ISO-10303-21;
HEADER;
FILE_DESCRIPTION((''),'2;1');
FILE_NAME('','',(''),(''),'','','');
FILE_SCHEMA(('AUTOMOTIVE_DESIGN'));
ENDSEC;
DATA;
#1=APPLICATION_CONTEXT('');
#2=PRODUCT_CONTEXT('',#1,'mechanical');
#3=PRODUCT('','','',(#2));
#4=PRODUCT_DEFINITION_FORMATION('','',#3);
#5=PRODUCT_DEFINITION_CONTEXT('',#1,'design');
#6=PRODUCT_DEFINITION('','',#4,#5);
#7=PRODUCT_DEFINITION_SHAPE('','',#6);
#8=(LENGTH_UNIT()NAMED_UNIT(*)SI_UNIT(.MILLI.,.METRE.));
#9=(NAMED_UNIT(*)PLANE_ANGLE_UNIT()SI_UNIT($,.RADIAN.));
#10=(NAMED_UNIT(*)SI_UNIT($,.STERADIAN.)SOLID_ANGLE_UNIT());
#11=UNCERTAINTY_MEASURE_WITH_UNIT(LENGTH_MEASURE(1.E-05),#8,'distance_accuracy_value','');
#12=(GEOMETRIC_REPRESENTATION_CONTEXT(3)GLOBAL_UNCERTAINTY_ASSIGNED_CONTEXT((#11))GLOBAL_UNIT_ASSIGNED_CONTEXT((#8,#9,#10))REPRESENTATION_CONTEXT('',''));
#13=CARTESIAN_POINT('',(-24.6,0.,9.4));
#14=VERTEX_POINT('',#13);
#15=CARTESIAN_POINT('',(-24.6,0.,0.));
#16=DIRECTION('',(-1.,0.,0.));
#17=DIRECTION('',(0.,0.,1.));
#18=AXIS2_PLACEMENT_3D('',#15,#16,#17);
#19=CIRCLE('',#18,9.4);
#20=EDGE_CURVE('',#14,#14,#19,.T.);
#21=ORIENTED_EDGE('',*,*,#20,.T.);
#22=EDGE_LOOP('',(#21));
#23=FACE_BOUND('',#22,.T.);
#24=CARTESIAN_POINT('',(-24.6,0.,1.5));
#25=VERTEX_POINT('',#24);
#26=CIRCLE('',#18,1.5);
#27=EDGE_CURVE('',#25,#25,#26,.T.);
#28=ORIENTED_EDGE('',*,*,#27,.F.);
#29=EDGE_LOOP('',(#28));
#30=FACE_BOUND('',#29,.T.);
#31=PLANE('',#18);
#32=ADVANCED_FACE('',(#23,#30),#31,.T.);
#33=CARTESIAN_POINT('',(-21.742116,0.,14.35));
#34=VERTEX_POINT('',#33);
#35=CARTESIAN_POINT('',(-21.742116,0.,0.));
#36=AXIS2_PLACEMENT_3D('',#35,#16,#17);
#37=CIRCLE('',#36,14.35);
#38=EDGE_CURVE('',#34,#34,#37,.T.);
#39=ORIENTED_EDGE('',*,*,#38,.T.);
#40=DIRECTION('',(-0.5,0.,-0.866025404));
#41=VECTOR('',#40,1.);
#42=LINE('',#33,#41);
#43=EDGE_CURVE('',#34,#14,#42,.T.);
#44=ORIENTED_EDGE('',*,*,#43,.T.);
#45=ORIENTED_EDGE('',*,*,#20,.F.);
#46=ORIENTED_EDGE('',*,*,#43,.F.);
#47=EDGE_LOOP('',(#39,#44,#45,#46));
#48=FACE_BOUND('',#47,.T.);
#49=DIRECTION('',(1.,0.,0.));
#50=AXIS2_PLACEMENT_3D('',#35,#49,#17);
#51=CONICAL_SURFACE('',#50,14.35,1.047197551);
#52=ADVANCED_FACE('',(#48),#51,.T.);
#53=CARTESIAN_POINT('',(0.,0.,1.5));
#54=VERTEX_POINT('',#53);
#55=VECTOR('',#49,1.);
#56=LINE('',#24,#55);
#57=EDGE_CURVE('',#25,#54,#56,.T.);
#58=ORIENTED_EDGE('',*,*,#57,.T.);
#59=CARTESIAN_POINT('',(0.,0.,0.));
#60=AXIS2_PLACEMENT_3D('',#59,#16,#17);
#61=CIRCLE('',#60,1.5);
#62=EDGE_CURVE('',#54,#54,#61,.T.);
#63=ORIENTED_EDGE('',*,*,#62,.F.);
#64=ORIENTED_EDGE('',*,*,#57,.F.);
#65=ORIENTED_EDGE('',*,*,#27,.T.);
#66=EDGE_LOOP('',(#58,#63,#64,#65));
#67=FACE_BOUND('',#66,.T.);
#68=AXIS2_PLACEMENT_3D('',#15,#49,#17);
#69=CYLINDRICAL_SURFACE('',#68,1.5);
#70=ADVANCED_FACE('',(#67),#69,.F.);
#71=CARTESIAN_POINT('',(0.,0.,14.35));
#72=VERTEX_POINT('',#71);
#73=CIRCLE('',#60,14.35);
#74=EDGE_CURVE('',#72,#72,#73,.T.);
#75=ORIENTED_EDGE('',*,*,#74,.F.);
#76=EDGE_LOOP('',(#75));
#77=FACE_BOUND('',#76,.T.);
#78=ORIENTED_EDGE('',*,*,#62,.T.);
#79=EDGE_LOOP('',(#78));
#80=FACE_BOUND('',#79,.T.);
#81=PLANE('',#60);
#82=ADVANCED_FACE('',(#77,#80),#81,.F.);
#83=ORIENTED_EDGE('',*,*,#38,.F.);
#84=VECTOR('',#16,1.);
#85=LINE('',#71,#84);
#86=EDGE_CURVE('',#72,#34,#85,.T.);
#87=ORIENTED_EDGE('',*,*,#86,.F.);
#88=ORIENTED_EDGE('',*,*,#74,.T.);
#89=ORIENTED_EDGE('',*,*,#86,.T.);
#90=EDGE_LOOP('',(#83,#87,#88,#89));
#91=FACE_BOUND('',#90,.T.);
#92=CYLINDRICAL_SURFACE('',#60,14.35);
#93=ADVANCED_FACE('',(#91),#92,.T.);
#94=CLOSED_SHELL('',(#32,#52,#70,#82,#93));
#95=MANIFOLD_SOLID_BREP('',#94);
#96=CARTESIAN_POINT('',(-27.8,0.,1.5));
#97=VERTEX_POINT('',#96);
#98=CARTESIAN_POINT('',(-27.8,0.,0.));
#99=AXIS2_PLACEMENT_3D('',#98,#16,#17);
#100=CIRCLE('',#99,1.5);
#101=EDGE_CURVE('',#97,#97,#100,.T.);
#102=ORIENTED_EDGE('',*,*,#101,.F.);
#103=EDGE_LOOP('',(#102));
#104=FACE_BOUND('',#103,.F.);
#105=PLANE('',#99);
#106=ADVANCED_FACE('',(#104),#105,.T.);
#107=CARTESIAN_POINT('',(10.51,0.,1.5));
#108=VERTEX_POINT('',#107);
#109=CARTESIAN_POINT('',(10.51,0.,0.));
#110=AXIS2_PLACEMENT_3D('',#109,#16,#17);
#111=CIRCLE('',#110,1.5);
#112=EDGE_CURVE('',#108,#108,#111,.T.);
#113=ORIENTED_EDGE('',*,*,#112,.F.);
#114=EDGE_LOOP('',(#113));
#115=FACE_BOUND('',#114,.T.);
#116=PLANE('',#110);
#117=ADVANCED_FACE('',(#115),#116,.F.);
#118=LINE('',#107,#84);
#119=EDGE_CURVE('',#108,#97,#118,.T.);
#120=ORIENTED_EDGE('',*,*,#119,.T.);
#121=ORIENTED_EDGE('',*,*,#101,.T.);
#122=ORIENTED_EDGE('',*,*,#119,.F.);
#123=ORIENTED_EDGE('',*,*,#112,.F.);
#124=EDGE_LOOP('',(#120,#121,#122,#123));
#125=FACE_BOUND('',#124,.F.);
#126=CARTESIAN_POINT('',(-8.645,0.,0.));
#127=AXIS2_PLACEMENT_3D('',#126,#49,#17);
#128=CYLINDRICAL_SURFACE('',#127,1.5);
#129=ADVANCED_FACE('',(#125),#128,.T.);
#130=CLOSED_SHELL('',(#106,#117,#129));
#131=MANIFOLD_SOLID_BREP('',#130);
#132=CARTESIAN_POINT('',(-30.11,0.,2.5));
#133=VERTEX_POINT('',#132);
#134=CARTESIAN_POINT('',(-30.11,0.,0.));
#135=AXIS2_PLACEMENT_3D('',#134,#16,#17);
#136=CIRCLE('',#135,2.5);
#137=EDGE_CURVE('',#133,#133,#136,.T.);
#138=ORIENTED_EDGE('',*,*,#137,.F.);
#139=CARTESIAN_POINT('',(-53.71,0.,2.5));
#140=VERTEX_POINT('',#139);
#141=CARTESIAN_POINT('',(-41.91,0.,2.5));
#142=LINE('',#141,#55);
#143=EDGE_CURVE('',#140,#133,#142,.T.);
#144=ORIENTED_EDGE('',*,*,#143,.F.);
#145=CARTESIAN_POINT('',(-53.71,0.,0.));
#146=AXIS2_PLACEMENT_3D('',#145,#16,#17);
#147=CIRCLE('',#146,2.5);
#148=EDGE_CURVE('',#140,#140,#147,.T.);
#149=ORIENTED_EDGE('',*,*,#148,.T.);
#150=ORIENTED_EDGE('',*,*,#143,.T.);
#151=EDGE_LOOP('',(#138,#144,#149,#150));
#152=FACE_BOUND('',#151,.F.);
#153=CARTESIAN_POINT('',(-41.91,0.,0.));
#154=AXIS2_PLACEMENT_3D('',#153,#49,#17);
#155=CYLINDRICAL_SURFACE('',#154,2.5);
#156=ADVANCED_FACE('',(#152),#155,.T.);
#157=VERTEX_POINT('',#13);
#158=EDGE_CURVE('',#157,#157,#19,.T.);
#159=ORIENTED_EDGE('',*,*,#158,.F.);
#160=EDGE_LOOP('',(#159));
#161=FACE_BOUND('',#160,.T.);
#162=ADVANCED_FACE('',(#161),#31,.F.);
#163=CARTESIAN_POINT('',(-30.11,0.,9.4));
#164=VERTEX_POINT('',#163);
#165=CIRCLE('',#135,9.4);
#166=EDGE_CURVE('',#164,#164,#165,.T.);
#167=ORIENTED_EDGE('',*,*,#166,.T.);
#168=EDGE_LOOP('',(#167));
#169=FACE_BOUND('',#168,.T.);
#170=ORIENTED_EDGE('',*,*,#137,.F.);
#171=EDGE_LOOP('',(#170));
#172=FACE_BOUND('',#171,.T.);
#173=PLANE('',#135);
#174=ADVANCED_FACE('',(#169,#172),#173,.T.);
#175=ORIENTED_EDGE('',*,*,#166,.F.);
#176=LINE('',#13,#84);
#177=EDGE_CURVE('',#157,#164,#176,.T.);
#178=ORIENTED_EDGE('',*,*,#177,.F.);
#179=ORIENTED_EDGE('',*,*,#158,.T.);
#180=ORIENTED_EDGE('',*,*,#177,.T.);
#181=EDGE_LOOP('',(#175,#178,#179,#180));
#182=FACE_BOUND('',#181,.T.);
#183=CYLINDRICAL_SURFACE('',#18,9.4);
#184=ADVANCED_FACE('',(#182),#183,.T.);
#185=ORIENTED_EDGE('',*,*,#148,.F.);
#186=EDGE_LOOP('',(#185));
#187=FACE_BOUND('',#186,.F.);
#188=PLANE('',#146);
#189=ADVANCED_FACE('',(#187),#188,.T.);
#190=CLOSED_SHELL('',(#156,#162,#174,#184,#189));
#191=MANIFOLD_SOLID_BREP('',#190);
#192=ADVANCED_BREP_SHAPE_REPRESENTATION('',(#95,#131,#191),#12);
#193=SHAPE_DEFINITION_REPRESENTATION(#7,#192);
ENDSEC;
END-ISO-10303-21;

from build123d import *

# Parameters (mm, degrees)
F1_W = 10.51
F1_H = 1.5
F2_W = 38.31
F2_H = 1.5
F3_W = 23.6
F3_H = 2.5


with BuildPart() as f4:
    # F1 (on Front) → F4 (revolve)
    with BuildSketch(Plane.XZ):
        with Locations((5.255, 0.75)):
            Rectangle(F1_W, F1_H)
    revolve(axis=Axis((-21.6, 0, 0), (-1, 0, 0)))

    # F2 (on Front) → F5 (revolve)
    with BuildSketch(Plane.XZ):
        with Locations((-8.645, 0.75)):
            Rectangle(F2_W, F2_H)
    revolve(axis=Axis((-21.6, 0, 0), (-1, 0, 0)))


with BuildPart() as f4b:
    # F1 (on Front) → F4, piece 2 (revolve)
    with BuildSketch(Plane.XZ):
        Polygon((0, 14.35), (-21.7421161675, 14.35), (-24.6, 9.4), (-24.6, 1.5), (0, 1.5), align=None)
    revolve(axis=Axis((-21.6, 0, 0), (-1, 0, 0)))


with BuildPart() as f6:
    # F3 (on Front) → F6 (revolve)
    with BuildSketch(Plane.XZ):
        with Locations((-41.91, 1.25)):
            Rectangle(F3_W, F3_H)
        Polygon((-24.6, 9.4), (-30.11, 9.4), (-30.11, 2.5), (-30.11, 0), (-24.6, 0), align=None)
    revolve(axis=Axis((-21.6, 0, 0), (-1, 0, 0)))


solid = Compound([f4.part, f4b.part, f6.part])
